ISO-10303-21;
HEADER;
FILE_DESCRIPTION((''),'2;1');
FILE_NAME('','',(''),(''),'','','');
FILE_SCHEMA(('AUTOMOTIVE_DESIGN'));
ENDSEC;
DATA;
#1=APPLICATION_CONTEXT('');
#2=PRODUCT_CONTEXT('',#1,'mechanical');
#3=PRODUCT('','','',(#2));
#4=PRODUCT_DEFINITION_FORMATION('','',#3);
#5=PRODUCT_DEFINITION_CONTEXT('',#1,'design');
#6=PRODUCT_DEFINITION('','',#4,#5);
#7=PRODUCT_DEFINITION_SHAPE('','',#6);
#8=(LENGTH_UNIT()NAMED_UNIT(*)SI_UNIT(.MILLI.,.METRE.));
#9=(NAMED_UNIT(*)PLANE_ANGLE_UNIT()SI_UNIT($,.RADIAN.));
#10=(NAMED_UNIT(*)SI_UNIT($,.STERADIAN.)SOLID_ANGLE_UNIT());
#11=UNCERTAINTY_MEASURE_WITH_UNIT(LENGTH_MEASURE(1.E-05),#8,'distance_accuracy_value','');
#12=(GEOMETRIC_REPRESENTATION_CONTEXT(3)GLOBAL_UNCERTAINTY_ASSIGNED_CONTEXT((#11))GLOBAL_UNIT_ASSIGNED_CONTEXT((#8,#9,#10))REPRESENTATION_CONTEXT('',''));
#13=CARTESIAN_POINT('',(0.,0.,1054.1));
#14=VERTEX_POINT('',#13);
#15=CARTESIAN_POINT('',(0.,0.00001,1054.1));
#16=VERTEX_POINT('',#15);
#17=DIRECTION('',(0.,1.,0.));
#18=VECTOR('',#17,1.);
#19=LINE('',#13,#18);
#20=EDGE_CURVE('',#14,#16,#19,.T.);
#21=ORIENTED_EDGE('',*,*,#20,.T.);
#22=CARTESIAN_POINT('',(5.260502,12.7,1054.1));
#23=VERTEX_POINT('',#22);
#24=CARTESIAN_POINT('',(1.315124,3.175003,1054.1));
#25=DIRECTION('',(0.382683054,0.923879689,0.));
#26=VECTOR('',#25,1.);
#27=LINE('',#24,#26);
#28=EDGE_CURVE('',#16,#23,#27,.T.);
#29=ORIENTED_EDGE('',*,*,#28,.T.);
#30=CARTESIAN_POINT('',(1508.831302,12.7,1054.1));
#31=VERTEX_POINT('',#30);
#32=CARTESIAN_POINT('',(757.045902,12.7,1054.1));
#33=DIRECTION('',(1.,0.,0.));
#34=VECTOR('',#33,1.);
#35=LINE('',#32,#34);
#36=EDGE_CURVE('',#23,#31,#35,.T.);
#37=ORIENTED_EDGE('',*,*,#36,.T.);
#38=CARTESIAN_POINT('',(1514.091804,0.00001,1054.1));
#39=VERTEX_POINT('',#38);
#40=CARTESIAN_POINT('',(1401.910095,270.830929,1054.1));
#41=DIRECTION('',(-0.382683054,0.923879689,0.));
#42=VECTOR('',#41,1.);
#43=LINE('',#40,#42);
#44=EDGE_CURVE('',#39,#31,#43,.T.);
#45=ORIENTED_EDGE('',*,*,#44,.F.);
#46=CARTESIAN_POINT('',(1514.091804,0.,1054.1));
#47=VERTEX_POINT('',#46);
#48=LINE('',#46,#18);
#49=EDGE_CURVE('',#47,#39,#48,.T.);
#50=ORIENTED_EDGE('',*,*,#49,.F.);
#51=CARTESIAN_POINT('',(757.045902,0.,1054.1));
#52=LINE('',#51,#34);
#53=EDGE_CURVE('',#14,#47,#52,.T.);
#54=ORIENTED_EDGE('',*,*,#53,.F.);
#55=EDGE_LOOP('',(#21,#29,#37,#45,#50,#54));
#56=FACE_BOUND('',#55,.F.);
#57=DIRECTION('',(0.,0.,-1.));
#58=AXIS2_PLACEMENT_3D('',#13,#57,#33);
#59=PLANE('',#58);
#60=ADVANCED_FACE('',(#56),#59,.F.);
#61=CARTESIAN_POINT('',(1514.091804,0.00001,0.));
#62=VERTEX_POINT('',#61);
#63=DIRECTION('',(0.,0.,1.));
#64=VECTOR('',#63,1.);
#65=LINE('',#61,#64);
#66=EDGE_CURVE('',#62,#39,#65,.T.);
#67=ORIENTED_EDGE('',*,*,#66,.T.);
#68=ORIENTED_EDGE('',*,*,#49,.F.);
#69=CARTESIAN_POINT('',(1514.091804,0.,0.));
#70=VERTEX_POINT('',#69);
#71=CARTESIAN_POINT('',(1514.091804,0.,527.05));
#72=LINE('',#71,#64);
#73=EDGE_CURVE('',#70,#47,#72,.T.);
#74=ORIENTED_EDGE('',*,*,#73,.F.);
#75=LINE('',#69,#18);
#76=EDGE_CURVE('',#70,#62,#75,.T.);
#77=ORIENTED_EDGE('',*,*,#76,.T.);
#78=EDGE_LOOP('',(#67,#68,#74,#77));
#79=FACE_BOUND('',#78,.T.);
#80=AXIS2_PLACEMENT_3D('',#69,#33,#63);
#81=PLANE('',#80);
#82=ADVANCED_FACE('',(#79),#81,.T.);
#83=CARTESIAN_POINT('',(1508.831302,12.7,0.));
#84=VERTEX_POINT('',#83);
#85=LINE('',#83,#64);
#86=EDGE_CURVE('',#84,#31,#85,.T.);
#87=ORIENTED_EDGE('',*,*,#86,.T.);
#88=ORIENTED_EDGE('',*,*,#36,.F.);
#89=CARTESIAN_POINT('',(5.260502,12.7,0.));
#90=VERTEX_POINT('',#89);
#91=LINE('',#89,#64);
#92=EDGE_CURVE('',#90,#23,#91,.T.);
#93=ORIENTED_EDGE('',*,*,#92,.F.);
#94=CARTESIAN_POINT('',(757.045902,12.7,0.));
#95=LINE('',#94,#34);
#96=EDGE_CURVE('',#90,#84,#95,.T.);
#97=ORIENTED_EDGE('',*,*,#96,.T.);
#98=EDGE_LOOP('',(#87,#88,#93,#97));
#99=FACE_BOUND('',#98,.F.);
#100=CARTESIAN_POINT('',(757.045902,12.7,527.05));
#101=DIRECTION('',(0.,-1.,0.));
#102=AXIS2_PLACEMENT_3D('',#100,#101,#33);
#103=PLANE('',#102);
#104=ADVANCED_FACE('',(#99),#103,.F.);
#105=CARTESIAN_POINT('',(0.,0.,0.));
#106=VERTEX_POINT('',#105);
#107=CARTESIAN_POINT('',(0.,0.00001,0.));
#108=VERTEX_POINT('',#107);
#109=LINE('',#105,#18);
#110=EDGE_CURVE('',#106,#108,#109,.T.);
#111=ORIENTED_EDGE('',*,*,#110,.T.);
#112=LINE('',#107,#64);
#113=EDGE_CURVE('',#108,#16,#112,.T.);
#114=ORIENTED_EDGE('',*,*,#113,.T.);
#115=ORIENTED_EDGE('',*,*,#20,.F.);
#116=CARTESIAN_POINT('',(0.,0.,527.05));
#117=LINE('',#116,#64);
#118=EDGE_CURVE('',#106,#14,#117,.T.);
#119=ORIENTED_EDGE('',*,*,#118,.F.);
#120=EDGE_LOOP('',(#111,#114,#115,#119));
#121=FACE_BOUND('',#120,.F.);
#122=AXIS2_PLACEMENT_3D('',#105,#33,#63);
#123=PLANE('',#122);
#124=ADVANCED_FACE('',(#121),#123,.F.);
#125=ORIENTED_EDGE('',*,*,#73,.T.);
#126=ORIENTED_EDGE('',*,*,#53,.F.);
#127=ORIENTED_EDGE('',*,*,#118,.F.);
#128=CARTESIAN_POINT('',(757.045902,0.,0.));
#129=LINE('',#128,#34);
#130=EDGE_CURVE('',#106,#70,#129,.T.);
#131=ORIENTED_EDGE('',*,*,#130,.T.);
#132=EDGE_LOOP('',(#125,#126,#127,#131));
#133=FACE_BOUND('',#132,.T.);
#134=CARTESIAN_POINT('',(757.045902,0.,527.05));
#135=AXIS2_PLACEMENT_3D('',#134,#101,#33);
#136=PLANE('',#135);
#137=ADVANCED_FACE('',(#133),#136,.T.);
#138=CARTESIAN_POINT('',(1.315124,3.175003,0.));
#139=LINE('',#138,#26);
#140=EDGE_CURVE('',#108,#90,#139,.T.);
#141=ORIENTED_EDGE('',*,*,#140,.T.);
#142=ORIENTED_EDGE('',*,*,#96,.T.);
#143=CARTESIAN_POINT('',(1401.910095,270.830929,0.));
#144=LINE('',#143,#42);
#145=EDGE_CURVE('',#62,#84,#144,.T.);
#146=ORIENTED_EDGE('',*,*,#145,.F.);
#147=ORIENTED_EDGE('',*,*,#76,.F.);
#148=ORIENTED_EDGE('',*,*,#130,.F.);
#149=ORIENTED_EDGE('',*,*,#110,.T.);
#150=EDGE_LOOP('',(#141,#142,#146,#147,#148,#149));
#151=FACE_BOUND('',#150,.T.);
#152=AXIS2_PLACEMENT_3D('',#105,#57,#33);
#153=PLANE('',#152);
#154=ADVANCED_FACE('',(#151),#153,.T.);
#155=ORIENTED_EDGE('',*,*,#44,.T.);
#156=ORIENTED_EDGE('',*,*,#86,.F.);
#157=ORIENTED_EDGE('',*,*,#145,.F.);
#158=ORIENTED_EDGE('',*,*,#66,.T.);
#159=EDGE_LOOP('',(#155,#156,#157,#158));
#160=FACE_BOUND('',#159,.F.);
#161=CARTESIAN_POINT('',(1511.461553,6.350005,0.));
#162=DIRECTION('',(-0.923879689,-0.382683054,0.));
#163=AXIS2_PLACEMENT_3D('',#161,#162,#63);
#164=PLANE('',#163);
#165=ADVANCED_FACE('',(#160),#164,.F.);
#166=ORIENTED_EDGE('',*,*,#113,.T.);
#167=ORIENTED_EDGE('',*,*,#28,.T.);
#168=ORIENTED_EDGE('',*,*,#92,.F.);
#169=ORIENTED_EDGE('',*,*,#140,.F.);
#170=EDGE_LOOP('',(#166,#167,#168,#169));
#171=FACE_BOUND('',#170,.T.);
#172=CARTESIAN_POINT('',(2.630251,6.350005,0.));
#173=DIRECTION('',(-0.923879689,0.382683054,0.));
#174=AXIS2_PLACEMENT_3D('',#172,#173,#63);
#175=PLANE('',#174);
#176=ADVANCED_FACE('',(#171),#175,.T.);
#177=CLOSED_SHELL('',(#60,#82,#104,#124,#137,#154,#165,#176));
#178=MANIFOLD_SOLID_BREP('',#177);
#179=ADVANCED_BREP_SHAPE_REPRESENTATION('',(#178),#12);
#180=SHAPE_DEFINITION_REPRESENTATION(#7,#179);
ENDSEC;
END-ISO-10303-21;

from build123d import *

# Parameters (mm, degrees)
F0_W       = 1514.0918044843
F0_H       = 1054.1
F1_DEPTH   = 12.7
F2_SIZE2   = 5.260502
F2_SIZE    = 12.69999
F2_2_SIZE2 = 5.260502
F2_2_SIZE  = 12.69999


# Not quite as in the source:
# - a fillet or chamfer is up to 0.001 mm smaller than in the source, because OpenCascade refuses the exact size


with BuildPart() as f1:
    # F0 (on Front) → F1 (new body)
    with BuildSketch(Plane.XZ):
        with Locations((757.0459022421, 527.05)):
            Rectangle(F0_W, F0_H)
    extrude(amount=-F1_DEPTH)

    # F2 (size 12.7 and 5.2605122421 in the source; OpenCascade refuses exactly that, so slightly less here)
    f2_edges = [f1.edges().sort_by_distance(p)[0] for p in [
        (1514.091804, 12.7, 527.05),
    ]]
    f2_side = f1.faces().sort_by_distance((1514.091804, 6.35, 527.05))[0]
    chamfer(f2_edges, length=F2_SIZE, length2=F2_SIZE2, reference=f2_side)

    # F2#2 (size 12.7 and 5.2605122421 in the source; OpenCascade refuses exactly that, so slightly less here)
    f2_2_edges = [f1.edges().sort_by_distance(p)[0] for p in [
        (0, 12.7, 527.05),
    ]]
    f2_2_side = f1.faces().sort_by_distance((0, 6.35, 527.05))[0]
    chamfer(f2_2_edges, length=F2_2_SIZE, length2=F2_2_SIZE2, reference=f2_2_side)


solid = f1.part
